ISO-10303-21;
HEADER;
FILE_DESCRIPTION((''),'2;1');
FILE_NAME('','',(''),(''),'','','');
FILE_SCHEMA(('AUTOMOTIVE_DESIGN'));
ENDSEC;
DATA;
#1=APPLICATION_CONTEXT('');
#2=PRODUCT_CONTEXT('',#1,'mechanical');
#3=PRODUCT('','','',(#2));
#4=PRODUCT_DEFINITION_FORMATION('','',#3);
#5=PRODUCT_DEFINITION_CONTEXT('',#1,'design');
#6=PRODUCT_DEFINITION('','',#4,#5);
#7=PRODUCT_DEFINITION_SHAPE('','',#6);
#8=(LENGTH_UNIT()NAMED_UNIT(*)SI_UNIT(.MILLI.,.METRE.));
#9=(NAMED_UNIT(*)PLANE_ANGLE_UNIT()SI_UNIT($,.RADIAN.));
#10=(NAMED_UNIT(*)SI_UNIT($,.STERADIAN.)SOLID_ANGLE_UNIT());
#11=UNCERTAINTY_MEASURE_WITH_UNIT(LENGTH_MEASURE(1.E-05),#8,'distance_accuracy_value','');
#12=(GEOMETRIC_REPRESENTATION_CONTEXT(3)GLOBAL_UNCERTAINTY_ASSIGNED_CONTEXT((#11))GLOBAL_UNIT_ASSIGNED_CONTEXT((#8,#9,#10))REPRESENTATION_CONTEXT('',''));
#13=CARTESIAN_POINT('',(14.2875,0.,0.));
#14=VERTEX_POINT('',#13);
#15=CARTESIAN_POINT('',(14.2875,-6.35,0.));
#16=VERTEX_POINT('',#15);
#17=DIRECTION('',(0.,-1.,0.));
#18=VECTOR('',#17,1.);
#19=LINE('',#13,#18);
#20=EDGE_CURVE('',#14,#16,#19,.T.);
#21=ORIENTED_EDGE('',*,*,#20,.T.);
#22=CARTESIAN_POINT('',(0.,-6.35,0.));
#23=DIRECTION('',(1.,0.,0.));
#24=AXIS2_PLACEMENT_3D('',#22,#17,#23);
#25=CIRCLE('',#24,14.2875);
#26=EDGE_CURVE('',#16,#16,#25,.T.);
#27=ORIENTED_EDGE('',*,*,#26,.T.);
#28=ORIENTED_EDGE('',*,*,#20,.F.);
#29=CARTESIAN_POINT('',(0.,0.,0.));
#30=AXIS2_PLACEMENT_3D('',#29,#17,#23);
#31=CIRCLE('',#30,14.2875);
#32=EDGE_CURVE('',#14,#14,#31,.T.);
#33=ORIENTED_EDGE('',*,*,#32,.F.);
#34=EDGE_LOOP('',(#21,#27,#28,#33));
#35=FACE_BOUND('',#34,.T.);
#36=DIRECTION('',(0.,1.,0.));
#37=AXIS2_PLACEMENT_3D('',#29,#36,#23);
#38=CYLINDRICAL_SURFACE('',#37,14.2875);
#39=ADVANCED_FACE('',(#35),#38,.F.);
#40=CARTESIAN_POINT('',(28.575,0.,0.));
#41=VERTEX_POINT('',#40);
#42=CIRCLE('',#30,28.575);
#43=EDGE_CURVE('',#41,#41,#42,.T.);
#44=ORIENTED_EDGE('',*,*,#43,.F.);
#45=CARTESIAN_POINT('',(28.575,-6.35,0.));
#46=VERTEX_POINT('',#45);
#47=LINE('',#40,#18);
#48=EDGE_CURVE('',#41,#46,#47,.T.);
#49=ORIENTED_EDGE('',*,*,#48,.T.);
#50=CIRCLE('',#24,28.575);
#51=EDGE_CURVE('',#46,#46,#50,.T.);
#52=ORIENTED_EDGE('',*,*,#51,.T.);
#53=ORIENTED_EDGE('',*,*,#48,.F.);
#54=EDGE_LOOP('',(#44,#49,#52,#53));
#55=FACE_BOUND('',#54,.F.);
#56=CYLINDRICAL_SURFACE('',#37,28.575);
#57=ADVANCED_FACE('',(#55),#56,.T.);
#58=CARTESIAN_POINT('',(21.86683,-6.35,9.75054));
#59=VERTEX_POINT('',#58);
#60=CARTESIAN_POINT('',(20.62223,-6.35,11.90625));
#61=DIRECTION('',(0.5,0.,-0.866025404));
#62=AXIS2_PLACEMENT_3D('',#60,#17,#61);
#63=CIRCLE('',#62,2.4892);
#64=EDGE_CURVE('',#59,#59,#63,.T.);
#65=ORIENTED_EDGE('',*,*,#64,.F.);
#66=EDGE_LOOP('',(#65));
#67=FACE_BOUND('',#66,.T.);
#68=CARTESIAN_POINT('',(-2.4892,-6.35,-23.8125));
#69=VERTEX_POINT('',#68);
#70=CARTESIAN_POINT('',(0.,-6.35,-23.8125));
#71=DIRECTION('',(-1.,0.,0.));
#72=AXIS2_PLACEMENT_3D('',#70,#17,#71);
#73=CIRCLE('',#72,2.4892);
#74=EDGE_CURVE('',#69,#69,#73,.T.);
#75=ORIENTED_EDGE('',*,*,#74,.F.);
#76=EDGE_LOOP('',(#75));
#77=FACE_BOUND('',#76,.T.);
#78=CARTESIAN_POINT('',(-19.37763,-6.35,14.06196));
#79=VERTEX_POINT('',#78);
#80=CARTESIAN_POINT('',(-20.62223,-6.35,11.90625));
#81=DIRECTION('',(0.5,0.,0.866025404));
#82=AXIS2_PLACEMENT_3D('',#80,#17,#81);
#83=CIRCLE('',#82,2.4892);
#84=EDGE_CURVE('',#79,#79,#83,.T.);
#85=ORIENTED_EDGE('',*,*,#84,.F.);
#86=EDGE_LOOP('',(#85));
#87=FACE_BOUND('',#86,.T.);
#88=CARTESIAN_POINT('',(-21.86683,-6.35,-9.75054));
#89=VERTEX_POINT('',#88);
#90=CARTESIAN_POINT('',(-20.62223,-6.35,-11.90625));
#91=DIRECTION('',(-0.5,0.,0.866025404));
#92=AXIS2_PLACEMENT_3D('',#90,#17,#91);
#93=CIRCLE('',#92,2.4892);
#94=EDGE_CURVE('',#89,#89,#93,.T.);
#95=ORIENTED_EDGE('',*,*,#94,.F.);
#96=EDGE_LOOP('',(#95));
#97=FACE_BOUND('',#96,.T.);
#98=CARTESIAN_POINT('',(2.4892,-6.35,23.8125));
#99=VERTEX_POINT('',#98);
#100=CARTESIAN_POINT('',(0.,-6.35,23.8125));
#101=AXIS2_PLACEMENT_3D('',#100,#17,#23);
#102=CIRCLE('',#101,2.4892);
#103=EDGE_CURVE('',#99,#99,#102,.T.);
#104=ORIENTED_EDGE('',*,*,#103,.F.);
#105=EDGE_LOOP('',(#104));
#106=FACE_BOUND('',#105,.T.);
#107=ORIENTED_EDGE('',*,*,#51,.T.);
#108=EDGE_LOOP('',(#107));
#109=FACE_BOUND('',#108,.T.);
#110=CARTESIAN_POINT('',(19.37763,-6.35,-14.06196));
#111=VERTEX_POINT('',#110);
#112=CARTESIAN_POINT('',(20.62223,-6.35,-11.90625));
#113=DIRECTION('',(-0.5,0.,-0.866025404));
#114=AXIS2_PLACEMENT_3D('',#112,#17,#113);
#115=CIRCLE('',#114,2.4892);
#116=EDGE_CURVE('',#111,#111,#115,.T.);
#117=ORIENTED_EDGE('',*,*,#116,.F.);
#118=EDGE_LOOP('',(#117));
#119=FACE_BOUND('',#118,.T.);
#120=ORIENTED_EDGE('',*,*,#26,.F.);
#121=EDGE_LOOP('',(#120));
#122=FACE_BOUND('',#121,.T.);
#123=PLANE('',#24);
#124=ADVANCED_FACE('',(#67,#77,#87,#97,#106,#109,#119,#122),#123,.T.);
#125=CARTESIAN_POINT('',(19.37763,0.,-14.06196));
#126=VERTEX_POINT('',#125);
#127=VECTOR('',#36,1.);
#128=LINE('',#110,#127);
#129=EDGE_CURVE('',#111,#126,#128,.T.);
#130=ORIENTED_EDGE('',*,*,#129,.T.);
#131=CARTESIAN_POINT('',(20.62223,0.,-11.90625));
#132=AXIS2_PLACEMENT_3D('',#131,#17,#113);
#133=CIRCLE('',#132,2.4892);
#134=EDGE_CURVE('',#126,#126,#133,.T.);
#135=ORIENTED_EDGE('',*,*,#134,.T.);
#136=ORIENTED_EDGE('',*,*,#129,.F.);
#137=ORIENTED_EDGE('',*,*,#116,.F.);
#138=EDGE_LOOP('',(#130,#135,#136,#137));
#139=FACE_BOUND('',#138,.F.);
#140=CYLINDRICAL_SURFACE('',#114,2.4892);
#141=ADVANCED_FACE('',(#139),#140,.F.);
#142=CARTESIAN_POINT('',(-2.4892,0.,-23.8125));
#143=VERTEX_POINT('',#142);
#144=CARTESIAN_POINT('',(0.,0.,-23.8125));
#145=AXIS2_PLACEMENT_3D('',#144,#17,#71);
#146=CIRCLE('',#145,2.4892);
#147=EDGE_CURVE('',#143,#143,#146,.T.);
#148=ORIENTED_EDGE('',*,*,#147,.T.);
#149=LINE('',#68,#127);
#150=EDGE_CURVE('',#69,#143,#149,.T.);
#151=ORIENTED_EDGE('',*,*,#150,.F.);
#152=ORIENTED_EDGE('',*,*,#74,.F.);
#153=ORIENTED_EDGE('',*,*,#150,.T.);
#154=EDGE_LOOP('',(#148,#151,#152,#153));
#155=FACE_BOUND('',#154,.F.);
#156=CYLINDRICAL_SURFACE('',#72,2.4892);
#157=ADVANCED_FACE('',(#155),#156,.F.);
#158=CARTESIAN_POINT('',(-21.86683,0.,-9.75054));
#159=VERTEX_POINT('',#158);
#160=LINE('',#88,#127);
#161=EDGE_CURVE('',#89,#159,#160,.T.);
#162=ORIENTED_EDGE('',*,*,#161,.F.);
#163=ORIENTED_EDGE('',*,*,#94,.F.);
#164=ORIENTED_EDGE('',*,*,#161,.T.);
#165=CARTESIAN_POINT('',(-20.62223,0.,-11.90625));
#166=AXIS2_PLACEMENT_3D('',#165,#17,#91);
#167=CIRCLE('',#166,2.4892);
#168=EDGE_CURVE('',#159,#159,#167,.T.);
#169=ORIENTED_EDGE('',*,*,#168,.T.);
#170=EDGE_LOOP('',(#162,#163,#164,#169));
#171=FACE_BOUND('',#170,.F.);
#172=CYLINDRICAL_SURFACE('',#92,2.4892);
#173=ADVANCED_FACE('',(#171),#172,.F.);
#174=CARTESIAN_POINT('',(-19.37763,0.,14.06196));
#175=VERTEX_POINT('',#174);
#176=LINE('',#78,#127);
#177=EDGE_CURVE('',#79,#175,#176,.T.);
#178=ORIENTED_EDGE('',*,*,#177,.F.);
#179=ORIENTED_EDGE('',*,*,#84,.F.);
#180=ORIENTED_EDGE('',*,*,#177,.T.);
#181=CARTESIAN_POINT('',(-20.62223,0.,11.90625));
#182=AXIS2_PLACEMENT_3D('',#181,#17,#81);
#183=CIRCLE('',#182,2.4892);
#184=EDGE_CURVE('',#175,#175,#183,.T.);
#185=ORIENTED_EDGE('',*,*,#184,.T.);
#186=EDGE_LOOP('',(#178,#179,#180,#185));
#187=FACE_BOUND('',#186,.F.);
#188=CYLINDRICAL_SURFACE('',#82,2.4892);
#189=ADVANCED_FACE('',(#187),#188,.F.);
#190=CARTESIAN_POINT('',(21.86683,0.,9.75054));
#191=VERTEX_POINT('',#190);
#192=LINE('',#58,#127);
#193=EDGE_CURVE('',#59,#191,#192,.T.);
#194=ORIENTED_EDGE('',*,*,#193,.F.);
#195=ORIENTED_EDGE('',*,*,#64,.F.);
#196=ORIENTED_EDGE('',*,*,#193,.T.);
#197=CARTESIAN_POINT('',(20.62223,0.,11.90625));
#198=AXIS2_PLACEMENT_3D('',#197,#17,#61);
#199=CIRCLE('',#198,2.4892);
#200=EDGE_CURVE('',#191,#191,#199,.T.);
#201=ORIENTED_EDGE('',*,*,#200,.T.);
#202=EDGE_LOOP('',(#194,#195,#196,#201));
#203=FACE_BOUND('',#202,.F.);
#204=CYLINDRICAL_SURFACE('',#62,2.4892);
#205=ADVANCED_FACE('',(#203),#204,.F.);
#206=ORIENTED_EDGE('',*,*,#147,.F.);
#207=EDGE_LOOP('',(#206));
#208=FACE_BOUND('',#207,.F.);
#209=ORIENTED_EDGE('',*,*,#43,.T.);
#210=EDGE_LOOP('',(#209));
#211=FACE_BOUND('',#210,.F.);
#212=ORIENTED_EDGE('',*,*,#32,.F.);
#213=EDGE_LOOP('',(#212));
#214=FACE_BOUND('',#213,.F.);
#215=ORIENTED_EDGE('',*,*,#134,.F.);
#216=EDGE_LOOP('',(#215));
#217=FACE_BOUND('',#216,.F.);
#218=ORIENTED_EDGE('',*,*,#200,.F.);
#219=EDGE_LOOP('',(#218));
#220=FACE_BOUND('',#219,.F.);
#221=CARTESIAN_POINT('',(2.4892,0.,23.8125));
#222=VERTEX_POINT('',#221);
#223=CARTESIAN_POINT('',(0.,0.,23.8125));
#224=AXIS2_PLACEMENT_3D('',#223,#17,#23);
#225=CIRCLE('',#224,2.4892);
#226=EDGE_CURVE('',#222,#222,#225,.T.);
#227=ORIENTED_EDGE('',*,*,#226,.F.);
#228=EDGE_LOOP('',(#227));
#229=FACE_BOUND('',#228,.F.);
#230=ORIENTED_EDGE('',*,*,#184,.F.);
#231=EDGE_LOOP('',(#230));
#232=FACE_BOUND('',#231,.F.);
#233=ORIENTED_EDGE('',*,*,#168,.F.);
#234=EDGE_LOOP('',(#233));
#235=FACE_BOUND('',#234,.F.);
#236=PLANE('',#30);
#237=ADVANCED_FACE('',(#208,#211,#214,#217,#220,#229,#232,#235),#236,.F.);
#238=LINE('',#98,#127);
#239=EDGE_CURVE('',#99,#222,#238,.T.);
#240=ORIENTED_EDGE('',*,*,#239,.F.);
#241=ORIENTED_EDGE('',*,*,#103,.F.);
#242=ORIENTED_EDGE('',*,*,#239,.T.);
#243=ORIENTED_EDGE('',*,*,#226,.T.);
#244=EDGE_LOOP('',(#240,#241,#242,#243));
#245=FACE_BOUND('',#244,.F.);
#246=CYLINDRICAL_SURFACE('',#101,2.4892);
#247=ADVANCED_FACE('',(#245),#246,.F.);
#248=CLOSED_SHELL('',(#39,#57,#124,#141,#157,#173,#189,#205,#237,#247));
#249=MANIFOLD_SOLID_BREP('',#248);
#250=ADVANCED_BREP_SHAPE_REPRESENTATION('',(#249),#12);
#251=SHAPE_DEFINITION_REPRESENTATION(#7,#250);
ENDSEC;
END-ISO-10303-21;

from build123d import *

# Parameters (mm, degrees)
F0_R            = 28.575
F0_R_2          = 14.2875
F1_DEPTH        = 6.35
F2_R            = 2.4892
F3_DEPTH        = 6.351
F3_COPIES_COUNT = 6


# Not quite as in the source:
# - a pattern or mirror of a feature is missing from the dataset's text; its kind, count and spacing are read off the source's solid


with BuildPart() as f1:
    # F0 (on Front) → F1 (new body)
    with BuildSketch(Plane.XZ):
        Circle(F0_R)
        Circle(F0_R_2, mode=Mode.SUBTRACT)
    extrude(amount=F1_DEPTH)

    # F2 (on face) → F3 (cut, through all)
    with BuildSketch(Plane.XZ.offset(6.35)):
        with Locations((0, 23.8125)):
            Circle(F2_R)
    f3 = extrude(amount=-F3_DEPTH, mode=Mode.SUBTRACT)

    # F3_copies: F3 ×6 about axis
    f3_copies_axis = Axis((0, 0, 0), (0, 1, 0))
    for i in range(1, F3_COPIES_COUNT):
        add(f3.rotate(f3_copies_axis, i * 360 / F3_COPIES_COUNT), mode=Mode.SUBTRACT)


solid = f1.part
